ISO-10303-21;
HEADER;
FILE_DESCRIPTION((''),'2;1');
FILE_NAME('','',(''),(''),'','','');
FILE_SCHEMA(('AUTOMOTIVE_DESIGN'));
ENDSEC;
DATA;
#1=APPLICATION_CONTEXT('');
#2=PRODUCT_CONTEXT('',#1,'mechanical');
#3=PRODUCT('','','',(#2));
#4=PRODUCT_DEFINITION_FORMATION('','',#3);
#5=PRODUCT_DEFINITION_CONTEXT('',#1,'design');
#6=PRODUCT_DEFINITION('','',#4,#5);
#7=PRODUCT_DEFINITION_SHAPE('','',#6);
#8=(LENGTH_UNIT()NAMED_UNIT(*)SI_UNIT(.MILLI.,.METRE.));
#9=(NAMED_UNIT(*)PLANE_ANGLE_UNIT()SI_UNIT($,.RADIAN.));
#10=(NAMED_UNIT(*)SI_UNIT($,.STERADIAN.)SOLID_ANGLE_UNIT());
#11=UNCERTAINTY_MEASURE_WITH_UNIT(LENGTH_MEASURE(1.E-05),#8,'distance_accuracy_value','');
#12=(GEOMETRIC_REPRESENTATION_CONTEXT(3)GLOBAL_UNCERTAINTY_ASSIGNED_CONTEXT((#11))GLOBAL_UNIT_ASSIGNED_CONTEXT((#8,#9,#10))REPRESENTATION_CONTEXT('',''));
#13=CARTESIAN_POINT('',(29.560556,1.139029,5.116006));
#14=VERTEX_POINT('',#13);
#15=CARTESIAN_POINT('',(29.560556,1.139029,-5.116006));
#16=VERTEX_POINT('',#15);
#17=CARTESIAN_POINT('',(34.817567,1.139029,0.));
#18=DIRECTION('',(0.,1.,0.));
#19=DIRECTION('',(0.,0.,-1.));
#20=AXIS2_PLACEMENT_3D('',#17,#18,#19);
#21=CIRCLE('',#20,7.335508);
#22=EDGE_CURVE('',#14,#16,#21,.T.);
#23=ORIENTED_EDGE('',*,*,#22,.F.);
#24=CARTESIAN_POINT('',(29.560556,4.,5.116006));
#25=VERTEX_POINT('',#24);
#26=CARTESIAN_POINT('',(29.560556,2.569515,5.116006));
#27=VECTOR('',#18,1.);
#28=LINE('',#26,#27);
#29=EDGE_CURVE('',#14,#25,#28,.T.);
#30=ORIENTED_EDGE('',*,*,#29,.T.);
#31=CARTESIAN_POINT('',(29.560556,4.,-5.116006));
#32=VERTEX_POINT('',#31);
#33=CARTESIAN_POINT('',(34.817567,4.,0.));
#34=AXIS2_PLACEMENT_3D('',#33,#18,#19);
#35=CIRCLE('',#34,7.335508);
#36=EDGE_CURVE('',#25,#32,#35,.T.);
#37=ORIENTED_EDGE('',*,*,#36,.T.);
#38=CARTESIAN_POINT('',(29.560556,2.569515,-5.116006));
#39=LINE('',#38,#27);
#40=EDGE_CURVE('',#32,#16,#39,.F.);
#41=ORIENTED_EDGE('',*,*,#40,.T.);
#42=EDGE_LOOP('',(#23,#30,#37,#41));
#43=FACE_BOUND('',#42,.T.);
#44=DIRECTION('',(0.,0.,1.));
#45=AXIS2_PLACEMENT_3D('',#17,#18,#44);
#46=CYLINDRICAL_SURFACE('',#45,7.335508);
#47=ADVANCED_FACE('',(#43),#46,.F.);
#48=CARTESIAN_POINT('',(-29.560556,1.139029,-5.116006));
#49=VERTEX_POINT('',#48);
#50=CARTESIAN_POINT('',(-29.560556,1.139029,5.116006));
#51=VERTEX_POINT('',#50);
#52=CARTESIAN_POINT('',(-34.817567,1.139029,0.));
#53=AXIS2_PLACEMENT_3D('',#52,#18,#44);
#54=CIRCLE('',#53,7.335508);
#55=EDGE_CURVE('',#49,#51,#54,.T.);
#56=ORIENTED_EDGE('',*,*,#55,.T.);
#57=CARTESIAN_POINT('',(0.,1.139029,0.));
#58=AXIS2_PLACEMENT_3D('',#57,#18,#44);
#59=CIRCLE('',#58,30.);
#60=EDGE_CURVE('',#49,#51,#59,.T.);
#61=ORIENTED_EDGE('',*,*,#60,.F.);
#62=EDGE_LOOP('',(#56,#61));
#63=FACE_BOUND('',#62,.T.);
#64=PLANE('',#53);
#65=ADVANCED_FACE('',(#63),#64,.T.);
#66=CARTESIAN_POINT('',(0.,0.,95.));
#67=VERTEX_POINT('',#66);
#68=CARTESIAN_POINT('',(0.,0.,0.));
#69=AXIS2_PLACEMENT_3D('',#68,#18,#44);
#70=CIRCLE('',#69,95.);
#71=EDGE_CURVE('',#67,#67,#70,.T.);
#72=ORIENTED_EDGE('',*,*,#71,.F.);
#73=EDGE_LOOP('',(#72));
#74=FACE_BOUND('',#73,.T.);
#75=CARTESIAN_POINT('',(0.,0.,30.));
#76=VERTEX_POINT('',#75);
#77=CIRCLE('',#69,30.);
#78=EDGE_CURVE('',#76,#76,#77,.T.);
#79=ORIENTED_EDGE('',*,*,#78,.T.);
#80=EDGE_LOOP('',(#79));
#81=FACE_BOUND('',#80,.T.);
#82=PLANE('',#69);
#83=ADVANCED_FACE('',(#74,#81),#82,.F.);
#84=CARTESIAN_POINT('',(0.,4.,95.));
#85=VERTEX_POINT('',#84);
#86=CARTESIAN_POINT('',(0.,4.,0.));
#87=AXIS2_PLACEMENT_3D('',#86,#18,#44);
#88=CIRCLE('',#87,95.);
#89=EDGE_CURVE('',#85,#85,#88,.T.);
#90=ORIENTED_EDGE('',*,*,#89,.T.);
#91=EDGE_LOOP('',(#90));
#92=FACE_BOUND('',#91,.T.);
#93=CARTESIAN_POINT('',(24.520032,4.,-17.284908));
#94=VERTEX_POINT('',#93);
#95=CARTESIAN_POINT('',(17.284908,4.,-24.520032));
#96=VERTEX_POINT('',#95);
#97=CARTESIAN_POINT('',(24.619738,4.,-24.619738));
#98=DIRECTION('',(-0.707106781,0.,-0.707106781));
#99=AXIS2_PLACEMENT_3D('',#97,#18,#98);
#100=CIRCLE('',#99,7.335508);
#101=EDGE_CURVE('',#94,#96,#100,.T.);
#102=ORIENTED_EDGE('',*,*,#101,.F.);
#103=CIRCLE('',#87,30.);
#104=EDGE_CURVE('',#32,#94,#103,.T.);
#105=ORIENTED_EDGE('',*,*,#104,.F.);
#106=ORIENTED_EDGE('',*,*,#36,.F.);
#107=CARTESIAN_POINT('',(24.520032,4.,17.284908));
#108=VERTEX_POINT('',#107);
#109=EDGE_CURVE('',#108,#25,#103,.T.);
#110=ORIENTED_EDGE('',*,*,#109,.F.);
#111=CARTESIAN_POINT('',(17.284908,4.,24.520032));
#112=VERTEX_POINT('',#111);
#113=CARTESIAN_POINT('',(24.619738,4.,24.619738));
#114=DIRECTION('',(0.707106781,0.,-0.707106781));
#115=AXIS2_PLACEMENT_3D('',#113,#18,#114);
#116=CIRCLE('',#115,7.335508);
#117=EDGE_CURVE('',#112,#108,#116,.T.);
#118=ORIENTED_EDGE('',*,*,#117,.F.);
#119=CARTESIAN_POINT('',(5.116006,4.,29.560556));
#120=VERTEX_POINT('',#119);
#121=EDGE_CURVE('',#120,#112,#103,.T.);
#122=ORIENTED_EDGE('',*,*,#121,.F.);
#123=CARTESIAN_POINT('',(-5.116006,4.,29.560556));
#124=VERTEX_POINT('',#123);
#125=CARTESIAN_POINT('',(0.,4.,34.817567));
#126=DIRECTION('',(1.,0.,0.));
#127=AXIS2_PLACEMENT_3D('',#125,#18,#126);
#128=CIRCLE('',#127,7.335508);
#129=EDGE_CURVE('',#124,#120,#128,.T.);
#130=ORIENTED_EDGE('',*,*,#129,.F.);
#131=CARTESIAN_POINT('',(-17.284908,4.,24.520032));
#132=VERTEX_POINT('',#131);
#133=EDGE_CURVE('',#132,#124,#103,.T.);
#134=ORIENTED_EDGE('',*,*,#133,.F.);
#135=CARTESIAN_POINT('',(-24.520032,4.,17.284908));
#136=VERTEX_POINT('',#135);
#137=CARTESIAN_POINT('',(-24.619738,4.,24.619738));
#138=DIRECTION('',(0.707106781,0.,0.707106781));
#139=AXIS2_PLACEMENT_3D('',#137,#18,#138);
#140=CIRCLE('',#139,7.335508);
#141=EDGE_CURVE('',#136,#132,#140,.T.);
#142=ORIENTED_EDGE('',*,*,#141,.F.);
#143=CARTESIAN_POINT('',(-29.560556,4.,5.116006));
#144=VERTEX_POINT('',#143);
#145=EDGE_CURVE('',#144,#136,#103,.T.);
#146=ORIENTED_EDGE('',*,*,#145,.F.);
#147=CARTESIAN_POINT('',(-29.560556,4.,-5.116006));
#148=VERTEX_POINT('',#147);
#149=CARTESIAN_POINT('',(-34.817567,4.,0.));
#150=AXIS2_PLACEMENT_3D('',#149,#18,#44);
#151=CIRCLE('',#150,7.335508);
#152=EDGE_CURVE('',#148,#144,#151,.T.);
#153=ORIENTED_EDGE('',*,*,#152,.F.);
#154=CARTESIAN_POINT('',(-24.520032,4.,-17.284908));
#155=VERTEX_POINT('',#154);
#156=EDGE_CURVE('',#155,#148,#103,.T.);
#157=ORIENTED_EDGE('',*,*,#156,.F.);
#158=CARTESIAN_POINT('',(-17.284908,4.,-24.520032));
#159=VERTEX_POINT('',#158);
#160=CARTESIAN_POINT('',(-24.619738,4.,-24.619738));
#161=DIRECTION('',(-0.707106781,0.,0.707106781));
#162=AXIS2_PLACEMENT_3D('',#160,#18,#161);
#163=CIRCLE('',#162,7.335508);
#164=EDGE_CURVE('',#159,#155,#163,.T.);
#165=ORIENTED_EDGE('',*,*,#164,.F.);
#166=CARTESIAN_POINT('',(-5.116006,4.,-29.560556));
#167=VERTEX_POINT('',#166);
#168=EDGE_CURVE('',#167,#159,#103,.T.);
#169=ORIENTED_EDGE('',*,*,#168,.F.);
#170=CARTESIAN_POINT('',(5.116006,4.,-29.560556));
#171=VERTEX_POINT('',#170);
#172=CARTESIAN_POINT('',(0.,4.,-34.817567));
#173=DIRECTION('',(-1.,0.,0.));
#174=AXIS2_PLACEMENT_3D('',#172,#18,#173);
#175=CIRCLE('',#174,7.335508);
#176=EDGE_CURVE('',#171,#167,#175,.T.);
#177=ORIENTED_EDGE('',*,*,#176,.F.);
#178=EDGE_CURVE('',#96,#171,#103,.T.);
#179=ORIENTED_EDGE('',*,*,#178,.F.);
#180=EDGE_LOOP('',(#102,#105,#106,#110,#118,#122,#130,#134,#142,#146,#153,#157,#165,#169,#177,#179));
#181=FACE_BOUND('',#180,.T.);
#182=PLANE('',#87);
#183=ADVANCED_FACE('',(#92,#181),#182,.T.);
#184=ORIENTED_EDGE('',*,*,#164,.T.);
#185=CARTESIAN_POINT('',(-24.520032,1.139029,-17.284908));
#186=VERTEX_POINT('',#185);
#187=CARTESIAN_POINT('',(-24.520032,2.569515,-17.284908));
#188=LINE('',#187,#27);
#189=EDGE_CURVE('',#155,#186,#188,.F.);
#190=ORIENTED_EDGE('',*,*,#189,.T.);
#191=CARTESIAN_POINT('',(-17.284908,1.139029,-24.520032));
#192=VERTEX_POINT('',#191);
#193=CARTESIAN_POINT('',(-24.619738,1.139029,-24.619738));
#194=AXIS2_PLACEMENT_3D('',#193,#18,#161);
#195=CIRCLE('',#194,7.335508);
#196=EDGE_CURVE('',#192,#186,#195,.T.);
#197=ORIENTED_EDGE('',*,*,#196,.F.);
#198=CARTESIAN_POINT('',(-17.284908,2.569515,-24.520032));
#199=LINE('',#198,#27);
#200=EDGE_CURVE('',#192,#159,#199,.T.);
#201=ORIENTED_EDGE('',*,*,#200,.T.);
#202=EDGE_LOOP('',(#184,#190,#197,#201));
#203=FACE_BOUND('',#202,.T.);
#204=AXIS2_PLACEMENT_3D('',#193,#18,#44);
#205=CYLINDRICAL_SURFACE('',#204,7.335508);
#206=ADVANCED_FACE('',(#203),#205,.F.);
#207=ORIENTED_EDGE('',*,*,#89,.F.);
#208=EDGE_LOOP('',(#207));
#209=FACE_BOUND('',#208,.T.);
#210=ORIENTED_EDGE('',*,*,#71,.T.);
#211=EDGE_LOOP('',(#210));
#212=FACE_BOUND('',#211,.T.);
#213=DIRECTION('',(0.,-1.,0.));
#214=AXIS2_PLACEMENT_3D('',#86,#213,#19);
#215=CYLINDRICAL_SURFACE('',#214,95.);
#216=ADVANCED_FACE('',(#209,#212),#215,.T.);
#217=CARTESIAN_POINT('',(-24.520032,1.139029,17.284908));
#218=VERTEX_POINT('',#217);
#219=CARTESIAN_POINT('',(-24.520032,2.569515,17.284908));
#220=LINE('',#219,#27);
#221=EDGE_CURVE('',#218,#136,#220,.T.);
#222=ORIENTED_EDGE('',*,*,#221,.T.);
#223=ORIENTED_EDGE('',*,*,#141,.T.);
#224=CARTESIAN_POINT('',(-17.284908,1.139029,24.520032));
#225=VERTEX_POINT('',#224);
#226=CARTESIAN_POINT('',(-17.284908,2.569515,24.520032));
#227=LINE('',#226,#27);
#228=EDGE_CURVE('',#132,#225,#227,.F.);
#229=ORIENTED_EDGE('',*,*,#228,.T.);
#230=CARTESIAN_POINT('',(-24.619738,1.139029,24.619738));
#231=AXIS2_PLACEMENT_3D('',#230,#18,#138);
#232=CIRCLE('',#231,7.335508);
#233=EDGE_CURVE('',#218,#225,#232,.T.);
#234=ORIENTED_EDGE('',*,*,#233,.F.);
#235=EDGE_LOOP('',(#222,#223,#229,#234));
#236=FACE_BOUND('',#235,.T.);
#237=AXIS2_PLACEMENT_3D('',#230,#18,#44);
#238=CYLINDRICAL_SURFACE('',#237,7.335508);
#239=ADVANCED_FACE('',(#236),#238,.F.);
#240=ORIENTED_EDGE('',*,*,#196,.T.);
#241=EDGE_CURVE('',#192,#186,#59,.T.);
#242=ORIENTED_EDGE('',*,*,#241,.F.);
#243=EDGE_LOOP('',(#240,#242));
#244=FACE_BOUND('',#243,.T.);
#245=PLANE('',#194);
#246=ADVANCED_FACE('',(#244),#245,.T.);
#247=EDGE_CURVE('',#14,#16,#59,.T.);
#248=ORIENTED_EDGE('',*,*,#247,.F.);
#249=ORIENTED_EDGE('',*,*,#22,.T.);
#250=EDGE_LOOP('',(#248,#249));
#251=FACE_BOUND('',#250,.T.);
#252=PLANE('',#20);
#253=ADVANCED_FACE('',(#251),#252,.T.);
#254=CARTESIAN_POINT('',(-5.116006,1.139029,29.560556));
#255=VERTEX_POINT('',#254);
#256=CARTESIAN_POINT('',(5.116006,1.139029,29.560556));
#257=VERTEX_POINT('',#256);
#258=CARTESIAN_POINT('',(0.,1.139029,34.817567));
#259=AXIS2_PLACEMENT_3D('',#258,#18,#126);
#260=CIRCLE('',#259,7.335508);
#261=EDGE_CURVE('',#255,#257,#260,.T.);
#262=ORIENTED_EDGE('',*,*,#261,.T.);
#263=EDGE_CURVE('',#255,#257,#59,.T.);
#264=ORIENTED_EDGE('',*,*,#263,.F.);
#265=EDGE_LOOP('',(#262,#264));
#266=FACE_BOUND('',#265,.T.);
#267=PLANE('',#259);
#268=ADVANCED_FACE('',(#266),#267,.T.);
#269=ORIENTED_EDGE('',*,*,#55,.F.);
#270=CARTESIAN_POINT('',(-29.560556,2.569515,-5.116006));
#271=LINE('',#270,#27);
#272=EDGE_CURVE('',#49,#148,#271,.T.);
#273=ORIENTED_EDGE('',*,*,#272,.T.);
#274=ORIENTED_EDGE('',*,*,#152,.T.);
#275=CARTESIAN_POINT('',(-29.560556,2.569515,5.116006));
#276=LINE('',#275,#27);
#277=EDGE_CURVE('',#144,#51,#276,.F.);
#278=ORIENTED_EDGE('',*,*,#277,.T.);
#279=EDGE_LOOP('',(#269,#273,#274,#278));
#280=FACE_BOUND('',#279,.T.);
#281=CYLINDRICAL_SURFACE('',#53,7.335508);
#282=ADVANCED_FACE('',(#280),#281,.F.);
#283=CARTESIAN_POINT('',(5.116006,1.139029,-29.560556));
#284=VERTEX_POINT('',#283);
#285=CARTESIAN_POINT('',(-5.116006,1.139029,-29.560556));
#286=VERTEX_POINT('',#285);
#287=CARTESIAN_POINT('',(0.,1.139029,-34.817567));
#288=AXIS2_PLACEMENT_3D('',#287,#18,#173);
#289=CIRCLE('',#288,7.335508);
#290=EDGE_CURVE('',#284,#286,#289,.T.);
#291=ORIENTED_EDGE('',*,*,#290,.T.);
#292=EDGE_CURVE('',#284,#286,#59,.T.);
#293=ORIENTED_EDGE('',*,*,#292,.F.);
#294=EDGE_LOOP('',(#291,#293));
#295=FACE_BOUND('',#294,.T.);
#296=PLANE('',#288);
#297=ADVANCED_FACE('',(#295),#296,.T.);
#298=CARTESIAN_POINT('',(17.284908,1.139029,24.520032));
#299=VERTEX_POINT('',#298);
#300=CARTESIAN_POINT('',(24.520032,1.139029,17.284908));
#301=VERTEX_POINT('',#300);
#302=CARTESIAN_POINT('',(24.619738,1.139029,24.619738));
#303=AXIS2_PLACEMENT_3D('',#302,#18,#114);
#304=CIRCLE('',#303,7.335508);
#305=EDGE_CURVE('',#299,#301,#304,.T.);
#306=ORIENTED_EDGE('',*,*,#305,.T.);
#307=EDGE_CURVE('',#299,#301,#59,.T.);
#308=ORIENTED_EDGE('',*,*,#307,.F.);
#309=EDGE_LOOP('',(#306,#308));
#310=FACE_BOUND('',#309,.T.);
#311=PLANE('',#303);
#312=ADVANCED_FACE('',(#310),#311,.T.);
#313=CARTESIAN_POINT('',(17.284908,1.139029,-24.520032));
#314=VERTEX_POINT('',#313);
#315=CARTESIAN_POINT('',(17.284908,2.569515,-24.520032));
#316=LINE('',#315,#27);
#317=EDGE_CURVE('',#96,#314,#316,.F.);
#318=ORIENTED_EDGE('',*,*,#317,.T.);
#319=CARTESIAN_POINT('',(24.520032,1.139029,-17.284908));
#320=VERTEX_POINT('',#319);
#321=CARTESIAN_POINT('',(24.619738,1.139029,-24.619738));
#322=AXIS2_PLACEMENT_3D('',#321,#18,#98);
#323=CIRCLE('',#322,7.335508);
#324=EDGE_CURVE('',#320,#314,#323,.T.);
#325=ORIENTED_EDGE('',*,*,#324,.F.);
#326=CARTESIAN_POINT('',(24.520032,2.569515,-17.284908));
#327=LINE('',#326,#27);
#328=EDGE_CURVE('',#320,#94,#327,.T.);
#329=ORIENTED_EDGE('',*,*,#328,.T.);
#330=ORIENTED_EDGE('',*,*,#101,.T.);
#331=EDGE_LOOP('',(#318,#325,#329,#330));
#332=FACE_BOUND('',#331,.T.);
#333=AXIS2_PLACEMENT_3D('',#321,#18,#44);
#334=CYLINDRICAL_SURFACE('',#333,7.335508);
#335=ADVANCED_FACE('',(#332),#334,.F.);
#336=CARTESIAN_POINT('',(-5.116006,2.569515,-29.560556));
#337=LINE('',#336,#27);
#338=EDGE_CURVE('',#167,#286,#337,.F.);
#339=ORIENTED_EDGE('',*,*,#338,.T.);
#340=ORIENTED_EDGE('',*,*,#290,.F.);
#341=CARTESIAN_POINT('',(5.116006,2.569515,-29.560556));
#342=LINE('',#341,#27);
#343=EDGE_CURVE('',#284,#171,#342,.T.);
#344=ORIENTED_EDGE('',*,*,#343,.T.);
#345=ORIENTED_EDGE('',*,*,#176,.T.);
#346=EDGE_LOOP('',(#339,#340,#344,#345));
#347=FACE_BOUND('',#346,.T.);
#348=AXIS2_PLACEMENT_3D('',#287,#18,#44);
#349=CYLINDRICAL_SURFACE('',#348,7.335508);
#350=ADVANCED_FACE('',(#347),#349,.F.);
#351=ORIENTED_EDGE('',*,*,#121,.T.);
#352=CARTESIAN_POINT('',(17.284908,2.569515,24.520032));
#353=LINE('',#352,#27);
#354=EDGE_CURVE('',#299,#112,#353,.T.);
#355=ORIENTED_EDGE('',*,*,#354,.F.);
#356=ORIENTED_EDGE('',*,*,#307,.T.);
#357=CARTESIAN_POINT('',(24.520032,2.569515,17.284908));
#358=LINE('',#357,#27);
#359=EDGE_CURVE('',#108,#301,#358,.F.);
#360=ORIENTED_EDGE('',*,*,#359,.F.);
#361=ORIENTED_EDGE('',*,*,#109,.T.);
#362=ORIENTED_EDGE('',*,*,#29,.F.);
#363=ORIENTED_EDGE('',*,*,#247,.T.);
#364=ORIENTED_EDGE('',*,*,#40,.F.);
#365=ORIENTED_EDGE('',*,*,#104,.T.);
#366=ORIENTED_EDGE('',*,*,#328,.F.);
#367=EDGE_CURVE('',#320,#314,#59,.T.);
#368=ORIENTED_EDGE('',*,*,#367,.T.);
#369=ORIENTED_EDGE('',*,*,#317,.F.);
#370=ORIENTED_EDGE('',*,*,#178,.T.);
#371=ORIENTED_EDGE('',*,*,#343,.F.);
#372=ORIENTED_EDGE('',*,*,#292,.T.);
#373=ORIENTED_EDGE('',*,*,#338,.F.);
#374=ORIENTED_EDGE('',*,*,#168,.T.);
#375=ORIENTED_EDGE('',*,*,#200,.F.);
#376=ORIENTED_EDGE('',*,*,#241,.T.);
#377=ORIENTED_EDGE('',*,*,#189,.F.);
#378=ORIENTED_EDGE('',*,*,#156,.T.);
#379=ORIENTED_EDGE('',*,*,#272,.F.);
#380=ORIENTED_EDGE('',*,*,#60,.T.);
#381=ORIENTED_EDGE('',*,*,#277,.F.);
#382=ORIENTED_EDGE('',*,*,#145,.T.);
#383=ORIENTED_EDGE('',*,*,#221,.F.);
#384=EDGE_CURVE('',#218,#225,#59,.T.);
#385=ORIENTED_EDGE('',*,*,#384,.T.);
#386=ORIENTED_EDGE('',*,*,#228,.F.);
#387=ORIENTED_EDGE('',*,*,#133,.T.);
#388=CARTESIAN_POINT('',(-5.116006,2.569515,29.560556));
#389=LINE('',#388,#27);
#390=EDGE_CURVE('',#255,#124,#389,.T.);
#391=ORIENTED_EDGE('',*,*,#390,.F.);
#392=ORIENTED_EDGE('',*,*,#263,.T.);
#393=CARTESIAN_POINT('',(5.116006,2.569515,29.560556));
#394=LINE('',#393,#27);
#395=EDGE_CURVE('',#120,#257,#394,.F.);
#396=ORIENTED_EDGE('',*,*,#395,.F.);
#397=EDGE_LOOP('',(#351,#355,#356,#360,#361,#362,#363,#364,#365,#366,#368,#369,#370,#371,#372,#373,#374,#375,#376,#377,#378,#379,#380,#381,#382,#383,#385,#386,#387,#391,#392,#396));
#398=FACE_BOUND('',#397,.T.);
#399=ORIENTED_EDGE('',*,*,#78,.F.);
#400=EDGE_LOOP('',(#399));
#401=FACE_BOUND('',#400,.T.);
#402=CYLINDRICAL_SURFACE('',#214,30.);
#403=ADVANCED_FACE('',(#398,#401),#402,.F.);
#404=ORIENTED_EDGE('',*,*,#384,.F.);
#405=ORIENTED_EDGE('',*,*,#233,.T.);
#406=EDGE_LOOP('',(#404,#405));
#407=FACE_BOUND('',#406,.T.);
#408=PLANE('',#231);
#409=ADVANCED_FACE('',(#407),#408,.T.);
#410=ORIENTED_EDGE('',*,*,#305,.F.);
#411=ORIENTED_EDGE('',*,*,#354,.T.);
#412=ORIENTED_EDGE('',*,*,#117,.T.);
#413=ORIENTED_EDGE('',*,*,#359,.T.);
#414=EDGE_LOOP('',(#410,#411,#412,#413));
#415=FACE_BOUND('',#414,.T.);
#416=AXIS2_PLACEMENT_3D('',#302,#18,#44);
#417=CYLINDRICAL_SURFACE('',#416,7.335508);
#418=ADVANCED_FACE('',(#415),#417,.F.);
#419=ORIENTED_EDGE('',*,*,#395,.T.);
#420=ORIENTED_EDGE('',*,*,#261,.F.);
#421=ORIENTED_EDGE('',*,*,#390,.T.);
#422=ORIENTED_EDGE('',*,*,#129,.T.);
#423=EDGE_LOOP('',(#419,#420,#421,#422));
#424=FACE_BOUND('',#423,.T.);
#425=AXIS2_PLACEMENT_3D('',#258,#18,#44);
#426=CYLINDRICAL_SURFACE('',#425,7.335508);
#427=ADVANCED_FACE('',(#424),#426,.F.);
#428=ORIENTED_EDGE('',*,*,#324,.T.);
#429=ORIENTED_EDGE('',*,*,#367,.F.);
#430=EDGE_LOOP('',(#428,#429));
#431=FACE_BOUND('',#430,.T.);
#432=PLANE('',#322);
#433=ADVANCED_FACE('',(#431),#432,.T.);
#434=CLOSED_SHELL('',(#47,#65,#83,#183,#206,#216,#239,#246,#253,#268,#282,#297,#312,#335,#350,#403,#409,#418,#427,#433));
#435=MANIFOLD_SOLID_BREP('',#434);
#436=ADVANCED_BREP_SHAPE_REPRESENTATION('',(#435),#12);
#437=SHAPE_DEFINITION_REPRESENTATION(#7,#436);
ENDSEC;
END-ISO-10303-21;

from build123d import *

# Parameters (mm, degrees)
SKETCH1_R           = 95
BOSS_EXTRUDE1_DEPTH = 4
SKETCH2_R           = 30
CUT_EXTRUDE1_DEPTH  = 135.40982107
SKETCH3_R           = 7.335507771
CUT_EXTRUDE2_DEPTH  = 2.860970943
CIRPATTERN1_COUNT   = 8


with BuildPart() as part:
    # Sketch1 → Boss-Extrude1 (new body)
    with BuildSketch(Plane(origin=(0, 0, 0), x_dir=(1, 0, 0), z_dir=(0, 1, 0))):
        Circle(SKETCH1_R)
    extrude(amount=BOSS_EXTRUDE1_DEPTH)

    # Sketch2 → Cut-Extrude1 (cut, through all)
    with BuildSketch(Plane(origin=(0, 0, 0), x_dir=(1, 0, 0), z_dir=(0, 1, 0))):
        Circle(SKETCH2_R)
    extrude(amount=CUT_EXTRUDE1_DEPTH, mode=Mode.SUBTRACT)

    # Sketch3 → Cut-Extrude2 (cut)
    with BuildSketch(Plane(origin=(0, 4, 0), x_dir=(1, 0, 0), z_dir=(0, 1, 0))):
        with Locations((-34.817566877, 0)):
            Circle(SKETCH3_R)
    cut_extrude2 = extrude(amount=-CUT_EXTRUDE2_DEPTH, mode=Mode.SUBTRACT)

    # CirPattern1: Cut-Extrude2 ×8 about axis
    cirpattern1_axis = Axis((0, 0, 0), (0, 1, 0))
    for i in range(1, CIRPATTERN1_COUNT):
        add(cut_extrude2.rotate(cirpattern1_axis, i * 360 / CIRPATTERN1_COUNT), mode=Mode.SUBTRACT)


solid = part.part
